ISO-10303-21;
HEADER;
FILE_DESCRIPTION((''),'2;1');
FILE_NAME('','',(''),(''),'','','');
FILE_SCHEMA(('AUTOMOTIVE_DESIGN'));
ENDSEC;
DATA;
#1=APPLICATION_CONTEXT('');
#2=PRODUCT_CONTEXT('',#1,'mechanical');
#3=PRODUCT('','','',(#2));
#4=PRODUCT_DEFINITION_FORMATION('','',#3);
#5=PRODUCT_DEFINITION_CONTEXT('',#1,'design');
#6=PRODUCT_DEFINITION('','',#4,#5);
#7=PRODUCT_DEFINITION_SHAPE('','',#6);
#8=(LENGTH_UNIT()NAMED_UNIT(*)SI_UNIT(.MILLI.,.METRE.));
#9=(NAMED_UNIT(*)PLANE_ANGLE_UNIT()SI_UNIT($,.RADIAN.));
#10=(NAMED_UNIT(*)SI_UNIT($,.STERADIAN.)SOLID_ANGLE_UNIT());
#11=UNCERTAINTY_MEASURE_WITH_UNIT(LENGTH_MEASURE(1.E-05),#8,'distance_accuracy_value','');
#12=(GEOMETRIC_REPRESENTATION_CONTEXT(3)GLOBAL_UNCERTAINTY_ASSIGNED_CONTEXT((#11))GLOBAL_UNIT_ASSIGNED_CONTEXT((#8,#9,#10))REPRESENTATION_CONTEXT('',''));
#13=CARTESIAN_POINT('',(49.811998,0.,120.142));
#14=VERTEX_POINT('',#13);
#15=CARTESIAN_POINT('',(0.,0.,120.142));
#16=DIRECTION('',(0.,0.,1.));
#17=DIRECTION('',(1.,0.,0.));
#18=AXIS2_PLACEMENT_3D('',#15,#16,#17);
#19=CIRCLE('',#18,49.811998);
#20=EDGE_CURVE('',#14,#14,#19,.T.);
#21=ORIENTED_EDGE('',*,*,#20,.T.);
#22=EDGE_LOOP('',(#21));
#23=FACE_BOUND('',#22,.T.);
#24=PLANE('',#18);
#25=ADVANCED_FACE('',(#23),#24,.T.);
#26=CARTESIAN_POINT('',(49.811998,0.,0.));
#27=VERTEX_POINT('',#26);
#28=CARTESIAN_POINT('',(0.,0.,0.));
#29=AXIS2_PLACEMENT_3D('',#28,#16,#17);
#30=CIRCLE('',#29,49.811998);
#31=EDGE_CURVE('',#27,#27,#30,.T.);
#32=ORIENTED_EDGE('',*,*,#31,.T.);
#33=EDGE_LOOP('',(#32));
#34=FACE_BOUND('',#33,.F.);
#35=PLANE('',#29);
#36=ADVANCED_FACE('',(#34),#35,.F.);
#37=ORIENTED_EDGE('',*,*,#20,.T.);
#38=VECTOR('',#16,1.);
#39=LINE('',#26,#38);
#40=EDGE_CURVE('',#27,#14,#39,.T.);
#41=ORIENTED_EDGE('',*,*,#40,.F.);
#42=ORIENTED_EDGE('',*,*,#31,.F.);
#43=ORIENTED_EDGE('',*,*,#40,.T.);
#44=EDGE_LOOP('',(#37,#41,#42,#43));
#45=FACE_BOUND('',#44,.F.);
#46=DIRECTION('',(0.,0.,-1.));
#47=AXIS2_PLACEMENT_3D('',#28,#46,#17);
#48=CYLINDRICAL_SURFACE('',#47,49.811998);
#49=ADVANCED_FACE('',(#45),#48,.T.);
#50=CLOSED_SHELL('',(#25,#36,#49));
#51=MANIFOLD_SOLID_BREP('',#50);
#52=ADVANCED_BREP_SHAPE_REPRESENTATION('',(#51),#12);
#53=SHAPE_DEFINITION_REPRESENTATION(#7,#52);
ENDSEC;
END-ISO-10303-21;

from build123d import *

# Parameters (mm, degrees)
F0_R     = 49.8119977907
F1_DEPTH = 120.142


# Not quite as in the source:
# - a feature of the source that left no trace in its solid (it failed there, or was rolled back) is left out


with BuildPart() as f1:
    # F0 (on Top) → F1 (new body)
    with BuildSketch(Plane.XY):
        Circle(F0_R)
    extrude(amount=F1_DEPTH)


solid = f1.part
